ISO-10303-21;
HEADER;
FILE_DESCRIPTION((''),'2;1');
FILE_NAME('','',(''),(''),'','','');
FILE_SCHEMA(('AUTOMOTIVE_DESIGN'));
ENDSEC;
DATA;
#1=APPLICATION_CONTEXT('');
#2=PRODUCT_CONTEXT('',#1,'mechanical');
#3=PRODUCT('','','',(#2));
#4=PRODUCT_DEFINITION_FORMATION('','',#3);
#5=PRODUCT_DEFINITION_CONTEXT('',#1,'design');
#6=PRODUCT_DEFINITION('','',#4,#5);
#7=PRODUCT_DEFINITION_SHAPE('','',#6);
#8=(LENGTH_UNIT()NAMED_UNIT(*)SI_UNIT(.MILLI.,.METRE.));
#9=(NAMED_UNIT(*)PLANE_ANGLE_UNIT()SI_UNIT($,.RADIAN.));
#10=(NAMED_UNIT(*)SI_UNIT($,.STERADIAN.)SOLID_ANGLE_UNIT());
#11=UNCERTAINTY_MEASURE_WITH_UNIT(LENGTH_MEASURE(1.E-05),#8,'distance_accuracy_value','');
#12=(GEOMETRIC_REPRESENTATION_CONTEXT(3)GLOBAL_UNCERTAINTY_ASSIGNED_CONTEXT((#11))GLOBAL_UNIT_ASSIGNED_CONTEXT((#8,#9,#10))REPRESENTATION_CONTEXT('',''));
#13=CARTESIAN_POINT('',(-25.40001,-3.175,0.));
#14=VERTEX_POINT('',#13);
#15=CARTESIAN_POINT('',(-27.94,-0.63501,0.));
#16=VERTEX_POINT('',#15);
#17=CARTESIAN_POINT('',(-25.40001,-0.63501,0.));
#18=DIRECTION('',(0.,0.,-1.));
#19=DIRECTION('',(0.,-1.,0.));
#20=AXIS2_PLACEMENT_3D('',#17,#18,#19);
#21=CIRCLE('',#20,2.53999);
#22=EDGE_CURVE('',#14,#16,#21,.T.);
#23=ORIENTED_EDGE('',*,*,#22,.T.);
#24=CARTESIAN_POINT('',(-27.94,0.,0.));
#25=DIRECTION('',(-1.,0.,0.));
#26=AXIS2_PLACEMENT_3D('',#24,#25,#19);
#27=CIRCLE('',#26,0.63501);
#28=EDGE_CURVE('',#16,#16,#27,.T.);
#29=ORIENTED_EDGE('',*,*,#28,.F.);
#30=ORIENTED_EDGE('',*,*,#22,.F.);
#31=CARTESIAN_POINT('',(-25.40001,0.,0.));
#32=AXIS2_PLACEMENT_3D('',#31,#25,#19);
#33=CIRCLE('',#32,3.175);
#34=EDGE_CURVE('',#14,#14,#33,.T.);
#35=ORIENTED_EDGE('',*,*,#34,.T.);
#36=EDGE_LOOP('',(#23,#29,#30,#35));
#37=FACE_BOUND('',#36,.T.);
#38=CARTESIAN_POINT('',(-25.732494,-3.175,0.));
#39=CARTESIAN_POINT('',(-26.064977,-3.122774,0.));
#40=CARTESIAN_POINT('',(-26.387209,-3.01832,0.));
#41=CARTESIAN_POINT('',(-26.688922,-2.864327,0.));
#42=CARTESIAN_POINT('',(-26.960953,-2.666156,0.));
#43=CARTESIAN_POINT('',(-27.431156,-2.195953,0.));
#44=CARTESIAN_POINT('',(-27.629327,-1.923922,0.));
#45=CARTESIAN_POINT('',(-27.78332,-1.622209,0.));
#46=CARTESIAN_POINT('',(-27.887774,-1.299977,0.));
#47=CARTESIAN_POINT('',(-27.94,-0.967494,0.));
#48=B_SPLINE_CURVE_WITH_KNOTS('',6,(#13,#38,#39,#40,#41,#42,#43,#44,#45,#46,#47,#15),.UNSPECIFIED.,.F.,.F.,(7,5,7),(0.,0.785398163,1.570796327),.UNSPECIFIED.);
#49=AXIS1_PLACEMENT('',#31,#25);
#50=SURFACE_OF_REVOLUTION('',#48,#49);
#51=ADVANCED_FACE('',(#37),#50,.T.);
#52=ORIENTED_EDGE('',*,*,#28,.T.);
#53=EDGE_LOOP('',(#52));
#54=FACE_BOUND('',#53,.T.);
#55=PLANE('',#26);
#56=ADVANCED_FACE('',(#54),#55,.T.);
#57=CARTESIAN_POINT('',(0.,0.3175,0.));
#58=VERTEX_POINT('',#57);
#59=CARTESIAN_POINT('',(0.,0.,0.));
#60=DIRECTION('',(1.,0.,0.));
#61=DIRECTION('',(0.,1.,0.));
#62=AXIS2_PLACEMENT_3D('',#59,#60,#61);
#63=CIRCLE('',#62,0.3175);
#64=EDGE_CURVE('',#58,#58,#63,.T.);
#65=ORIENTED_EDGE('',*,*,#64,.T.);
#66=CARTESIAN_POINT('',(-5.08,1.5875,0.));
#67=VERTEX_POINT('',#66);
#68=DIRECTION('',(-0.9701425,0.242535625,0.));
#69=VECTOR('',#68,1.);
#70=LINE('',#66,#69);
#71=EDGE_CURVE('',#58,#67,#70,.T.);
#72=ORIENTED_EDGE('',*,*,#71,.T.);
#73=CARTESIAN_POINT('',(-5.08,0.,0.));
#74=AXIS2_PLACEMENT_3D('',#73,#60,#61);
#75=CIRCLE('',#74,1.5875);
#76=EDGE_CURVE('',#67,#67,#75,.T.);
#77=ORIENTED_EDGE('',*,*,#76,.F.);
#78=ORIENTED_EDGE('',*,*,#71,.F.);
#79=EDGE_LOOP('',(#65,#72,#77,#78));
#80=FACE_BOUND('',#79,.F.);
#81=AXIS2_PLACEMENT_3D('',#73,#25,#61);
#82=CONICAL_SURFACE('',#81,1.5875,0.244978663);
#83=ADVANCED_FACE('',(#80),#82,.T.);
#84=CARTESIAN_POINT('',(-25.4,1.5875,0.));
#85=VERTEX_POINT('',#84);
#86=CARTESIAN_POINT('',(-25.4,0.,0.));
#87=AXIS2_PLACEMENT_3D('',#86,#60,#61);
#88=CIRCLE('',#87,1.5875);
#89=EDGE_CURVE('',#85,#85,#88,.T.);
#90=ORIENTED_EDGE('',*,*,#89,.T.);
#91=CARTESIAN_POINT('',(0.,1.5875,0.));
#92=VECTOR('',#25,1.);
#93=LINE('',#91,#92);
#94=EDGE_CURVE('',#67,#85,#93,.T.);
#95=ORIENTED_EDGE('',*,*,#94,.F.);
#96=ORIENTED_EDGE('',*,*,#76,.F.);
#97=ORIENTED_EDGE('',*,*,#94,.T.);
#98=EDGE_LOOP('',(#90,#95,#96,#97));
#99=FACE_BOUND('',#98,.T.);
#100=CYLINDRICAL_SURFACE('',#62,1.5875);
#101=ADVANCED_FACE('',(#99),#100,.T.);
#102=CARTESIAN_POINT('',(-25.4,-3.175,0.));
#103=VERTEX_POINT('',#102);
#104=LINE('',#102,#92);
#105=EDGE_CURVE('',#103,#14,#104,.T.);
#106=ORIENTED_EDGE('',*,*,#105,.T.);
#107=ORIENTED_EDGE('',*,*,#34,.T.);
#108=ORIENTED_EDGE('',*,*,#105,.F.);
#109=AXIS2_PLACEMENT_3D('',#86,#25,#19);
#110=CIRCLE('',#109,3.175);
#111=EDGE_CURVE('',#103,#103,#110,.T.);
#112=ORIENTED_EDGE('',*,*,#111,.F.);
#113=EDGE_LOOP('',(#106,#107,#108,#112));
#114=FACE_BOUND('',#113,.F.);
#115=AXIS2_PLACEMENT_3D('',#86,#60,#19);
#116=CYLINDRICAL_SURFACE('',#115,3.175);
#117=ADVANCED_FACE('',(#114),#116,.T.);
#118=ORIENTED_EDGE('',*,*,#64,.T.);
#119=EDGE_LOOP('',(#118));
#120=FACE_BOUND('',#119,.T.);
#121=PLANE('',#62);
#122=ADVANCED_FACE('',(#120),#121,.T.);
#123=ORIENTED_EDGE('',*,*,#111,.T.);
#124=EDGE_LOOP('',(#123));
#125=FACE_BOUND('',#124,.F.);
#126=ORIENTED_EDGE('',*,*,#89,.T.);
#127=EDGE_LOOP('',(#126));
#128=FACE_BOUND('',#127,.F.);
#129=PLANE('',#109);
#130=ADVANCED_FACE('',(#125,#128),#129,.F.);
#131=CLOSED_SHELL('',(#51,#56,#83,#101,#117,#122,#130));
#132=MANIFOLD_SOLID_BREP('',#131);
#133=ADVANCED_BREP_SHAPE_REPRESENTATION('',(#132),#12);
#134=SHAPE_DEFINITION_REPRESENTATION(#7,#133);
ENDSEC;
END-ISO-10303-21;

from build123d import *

# Parameters (mm, degrees)
F0_R     = 1.5875
F1_DEPTH = 25.4
F2_R     = 3.175
F2_R_2   = 1.5875
F3_DEPTH = 2.54
F4_R     = 2.53999
F5_SIZE2 = 5.08
F5_SIZE  = 1.27


# Not quite as in the source:
# - a fillet or chamfer is up to 0.001 mm smaller than in the source, because OpenCascade refuses the exact size


with BuildPart() as f1:
    # F0 (on Right) → F1 (new body)
    with BuildSketch(Plane.YZ):
        Circle(F0_R)
    extrude(amount=-F1_DEPTH)

    # F2 (on face) → F3 (join)
    with BuildSketch(Plane(origin=(-25.4, 0, 0), x_dir=(0, -1, 0), z_dir=(-1, 0, 0))):
        Circle(F2_R)
        Circle(F2_R_2, mode=Mode.SUBTRACT)
        Circle(F2_R_2)
    extrude(amount=F3_DEPTH)

    # F4 (radius 2.54 in the source; OpenCascade refuses exactly that, so slightly less here)
    f4_edges = [f1.edges().sort_by_distance(p)[0] for p in [
        (-27.94, 3.175, 0),
    ]]
    fillet(f4_edges, radius=F4_R)

    # F5
    f5_edges = [f1.edges().sort_by_distance(p)[0] for p in [
        (0, -1.5875, 0),
    ]]
    f5_side = f1.faces().sort_by_distance((0, 0, 0))[0]
    chamfer(f5_edges, length=F5_SIZE, length2=F5_SIZE2, reference=f5_side)


solid = f1.part
